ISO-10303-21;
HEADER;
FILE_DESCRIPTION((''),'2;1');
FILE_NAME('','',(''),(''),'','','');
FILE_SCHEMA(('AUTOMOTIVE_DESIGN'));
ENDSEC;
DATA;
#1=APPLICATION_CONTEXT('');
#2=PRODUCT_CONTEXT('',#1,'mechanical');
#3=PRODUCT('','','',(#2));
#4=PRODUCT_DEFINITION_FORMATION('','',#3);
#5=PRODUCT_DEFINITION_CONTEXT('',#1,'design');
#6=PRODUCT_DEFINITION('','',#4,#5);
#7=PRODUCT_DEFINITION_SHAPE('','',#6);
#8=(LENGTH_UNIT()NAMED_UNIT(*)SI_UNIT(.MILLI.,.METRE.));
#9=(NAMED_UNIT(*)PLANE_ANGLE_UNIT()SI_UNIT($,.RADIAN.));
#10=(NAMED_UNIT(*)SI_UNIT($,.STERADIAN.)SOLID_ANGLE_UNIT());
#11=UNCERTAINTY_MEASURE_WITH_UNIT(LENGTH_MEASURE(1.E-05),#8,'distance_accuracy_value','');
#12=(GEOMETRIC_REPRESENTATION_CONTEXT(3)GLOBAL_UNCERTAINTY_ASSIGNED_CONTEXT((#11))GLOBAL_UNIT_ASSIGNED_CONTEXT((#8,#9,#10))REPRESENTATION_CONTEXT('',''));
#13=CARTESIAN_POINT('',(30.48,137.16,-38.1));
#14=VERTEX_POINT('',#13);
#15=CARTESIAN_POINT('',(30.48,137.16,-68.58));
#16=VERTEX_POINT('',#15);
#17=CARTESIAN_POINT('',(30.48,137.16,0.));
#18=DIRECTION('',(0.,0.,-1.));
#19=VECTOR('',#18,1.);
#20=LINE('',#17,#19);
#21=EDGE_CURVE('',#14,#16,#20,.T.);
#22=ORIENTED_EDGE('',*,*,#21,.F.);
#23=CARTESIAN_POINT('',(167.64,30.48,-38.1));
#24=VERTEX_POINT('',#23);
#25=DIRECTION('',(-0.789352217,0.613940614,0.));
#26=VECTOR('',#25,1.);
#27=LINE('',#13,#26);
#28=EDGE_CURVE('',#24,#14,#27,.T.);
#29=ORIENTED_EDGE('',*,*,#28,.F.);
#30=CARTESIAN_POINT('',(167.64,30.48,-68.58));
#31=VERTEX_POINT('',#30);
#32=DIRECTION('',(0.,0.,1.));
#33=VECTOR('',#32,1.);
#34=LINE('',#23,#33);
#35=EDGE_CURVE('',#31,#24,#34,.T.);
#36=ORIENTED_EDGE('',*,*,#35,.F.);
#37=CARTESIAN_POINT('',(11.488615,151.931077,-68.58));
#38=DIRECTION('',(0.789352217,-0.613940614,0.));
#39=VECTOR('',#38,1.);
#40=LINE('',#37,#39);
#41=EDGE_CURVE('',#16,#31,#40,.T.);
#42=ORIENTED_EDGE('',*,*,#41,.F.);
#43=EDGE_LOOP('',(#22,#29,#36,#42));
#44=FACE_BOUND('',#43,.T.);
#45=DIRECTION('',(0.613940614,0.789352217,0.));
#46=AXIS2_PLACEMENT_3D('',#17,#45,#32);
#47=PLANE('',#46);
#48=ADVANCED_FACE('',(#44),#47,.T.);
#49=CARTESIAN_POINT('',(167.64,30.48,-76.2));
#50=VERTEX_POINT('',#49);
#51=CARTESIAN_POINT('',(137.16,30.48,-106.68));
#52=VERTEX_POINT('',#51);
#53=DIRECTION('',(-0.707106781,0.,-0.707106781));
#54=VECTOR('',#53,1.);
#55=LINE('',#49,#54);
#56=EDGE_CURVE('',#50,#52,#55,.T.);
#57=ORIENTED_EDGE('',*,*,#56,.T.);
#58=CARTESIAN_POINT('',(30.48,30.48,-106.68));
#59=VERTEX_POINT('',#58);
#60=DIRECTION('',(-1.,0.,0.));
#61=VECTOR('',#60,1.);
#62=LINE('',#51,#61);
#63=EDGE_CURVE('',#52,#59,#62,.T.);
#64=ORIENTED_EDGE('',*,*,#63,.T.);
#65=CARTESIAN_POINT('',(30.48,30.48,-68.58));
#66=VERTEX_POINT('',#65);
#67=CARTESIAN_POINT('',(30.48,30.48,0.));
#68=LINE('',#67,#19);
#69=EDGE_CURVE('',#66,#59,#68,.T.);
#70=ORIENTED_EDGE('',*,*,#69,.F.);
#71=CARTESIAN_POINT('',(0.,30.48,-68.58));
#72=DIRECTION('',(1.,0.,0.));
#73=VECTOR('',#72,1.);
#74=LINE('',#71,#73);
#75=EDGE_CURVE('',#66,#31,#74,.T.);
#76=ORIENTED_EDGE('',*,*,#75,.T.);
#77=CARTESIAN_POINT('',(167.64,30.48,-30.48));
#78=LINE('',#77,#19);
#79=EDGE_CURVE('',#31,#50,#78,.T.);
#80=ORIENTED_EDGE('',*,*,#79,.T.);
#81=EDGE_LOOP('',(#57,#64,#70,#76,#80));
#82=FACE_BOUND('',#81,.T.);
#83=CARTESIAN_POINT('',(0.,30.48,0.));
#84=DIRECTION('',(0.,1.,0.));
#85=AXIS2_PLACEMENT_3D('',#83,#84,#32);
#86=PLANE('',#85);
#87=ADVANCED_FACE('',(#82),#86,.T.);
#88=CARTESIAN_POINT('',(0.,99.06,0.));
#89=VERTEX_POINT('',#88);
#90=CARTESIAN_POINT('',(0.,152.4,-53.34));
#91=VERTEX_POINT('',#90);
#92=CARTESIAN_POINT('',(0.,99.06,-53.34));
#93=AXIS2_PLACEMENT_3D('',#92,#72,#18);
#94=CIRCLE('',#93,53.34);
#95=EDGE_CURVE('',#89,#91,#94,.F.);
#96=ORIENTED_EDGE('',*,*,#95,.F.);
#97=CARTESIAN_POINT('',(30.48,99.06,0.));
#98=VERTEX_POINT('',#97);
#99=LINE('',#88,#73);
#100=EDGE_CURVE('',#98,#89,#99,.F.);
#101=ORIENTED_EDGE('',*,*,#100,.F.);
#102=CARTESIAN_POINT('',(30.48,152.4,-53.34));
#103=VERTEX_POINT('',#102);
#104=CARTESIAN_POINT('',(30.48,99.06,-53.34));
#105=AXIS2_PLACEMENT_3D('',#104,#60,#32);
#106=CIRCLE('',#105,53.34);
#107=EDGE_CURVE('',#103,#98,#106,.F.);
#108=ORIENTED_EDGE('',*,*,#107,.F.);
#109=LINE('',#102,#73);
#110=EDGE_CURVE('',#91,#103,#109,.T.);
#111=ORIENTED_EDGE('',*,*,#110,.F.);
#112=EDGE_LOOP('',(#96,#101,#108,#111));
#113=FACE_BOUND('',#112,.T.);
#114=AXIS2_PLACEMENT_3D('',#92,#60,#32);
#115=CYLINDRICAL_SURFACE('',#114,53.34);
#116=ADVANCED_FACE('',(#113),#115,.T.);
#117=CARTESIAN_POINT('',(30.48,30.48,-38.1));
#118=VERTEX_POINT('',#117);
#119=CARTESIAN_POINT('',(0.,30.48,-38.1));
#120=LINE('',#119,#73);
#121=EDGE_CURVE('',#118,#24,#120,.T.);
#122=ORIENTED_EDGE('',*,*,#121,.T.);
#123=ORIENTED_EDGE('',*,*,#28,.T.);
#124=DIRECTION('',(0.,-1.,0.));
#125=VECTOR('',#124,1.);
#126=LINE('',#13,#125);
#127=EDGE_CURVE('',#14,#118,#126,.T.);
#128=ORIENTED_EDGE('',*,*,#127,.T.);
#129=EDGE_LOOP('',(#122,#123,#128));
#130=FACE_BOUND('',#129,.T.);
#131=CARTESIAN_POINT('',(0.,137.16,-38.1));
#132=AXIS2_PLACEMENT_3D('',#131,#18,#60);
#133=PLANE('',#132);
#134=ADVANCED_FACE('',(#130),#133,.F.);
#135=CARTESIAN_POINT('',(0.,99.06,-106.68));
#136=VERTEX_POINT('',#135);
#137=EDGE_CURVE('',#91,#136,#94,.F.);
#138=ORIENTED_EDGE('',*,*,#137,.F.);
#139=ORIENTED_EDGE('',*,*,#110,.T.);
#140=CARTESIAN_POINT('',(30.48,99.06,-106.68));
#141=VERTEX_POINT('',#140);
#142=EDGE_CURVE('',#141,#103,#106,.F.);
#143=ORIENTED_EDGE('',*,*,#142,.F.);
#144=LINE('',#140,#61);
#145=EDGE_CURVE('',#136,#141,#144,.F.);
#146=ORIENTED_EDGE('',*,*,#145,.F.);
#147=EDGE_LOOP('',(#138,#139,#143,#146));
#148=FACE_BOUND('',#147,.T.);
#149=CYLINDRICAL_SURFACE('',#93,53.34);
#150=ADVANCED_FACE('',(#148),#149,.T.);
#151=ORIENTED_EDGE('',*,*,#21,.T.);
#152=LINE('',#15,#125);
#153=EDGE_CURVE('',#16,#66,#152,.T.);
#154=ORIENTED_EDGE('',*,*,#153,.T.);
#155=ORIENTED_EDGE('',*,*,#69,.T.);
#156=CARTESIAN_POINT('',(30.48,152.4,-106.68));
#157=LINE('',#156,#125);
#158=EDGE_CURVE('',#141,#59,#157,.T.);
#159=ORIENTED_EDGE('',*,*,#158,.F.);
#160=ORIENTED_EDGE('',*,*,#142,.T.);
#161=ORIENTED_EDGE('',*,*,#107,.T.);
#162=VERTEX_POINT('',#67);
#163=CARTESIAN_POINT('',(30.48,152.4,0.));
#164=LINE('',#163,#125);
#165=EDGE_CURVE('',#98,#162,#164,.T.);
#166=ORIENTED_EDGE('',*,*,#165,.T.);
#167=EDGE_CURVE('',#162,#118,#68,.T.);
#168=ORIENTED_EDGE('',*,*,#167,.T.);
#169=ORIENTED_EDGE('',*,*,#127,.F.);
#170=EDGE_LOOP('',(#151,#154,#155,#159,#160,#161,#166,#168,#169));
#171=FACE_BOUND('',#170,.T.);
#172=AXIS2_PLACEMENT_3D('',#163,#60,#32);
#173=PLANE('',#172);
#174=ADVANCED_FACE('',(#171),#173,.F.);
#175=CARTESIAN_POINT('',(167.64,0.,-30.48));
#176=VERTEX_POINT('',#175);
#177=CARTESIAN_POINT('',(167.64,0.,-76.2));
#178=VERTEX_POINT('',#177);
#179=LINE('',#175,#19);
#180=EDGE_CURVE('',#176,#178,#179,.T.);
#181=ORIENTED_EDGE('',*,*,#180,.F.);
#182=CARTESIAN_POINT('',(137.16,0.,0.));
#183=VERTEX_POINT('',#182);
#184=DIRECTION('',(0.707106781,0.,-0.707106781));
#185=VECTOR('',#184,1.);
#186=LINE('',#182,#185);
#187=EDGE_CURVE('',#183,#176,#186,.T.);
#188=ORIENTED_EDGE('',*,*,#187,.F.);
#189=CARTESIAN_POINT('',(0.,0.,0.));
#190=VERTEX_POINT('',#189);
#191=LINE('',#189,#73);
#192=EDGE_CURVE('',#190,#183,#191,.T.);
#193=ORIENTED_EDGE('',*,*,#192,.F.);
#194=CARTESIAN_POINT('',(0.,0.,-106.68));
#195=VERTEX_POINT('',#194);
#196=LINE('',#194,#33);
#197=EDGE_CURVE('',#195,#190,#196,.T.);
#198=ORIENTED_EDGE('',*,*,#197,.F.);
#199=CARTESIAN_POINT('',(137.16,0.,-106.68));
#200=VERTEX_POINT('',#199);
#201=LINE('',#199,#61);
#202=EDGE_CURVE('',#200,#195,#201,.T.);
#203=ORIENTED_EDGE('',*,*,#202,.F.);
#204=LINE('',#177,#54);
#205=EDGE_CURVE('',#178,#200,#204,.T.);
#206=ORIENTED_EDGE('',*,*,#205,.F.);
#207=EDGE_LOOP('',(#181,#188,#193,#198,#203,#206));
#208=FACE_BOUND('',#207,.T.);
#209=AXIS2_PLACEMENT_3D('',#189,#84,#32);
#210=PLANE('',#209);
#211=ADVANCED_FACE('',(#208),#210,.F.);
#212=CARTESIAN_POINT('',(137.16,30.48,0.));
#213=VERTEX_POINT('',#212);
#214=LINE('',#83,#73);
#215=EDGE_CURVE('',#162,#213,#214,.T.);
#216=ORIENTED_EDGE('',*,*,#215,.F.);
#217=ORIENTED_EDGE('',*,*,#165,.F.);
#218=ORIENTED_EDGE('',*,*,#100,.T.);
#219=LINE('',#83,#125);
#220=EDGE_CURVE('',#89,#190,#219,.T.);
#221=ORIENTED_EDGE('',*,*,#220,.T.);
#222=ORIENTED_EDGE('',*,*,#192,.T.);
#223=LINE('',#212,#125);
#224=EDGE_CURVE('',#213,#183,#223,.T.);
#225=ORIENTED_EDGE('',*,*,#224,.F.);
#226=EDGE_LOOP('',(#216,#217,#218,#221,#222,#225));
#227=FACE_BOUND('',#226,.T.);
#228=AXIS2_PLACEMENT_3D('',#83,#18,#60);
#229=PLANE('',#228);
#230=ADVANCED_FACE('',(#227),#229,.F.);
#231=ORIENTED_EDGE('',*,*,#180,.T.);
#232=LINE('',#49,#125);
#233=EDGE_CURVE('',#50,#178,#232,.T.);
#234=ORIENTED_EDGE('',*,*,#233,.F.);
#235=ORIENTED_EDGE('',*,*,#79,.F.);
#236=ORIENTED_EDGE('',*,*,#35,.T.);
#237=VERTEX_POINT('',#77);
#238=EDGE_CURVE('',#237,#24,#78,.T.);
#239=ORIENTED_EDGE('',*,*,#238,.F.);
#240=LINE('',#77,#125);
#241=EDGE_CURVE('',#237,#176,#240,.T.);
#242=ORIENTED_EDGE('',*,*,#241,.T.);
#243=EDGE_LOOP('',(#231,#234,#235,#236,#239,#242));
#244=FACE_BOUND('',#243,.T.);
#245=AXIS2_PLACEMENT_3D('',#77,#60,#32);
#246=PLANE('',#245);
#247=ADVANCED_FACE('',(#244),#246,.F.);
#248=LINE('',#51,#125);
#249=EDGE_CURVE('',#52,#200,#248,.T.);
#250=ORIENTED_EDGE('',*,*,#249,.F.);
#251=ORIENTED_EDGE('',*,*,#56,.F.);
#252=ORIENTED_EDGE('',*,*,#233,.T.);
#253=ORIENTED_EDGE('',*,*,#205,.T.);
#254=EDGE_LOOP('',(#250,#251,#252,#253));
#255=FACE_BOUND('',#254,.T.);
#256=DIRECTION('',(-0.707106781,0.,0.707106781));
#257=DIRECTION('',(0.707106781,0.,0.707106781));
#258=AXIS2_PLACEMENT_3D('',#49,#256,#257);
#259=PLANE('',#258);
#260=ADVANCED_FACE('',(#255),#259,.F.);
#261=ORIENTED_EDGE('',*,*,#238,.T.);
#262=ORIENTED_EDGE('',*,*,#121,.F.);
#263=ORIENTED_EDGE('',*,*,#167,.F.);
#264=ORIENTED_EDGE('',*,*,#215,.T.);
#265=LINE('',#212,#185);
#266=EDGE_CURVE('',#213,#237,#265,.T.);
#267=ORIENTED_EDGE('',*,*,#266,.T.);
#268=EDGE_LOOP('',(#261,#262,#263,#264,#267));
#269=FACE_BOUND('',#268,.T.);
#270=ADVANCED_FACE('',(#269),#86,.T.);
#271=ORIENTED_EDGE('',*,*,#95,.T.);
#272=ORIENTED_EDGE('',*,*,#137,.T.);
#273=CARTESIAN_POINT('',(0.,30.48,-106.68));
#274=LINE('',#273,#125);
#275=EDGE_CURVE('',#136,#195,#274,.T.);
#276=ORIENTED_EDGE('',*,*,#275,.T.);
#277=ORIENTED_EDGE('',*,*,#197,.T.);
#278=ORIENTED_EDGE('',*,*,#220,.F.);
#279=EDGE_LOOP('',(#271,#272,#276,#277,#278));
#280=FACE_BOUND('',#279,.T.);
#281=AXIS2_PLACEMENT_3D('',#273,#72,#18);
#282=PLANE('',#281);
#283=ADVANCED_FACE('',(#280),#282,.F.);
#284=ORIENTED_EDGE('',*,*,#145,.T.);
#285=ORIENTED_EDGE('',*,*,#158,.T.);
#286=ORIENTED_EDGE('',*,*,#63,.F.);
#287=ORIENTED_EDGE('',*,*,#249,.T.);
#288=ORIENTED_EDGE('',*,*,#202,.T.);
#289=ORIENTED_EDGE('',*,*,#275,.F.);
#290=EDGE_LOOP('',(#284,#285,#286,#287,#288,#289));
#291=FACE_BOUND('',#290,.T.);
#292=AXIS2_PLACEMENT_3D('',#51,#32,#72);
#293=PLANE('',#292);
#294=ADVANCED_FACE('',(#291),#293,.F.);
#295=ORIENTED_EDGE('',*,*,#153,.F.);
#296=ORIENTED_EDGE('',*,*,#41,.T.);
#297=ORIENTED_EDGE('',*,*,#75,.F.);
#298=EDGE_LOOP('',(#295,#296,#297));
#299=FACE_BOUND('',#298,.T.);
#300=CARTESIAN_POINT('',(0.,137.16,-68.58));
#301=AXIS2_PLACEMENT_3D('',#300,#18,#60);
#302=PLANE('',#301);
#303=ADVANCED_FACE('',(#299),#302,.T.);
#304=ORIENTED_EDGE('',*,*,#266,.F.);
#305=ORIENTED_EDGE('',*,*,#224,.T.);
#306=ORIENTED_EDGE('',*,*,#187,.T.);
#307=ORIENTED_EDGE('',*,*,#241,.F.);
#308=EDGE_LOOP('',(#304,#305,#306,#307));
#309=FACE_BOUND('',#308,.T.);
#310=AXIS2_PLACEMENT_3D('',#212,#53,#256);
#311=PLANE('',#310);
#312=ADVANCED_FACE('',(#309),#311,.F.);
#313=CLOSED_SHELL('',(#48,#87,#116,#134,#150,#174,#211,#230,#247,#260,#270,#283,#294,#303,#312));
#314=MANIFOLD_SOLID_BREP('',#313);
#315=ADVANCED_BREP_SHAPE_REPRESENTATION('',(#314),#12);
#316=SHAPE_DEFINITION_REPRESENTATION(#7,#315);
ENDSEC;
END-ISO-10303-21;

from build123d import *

# Parameters (mm, degrees)
BOSS_EXTRUDE1_DEPTH = 30.48
BOSS_EXTRUDE2_DEPTH = 121.92
SKETCH2_3_W         = 137.16
SKETCH2_3_H         = 30.48
BOSS_EXTRUDE3_DEPTH = 106.68
FILLET1_R           = 53.34
CHAMFER1_SIZE2      = 137.16
CHAMFER1_SIZE       = 106.68


with BuildPart() as part:
    # Sketch1 → Boss-Extrude1 (new body)
    with BuildSketch(Plane(origin=(0, 0, 0), x_dir=(1, 0, 0), z_dir=(0, 1, 0))):
        Polygon((0, 0), (137.16, 0), (167.64, 30.48), (167.64, 76.2), (137.16, 106.68), (0, 106.68), align=None)
    extrude(amount=BOSS_EXTRUDE1_DEPTH)

    # Sketch2 → Boss-Extrude2 (add)
    with BuildSketch(Plane(origin=(0, 30.48, 0), x_dir=(1, 0, 0), z_dir=(0, 1, 0))):
        Polygon((30.48, 106.68), (0, 106.68), (0, 0), (30.48, 0), (30.48, 38.1), (30.48, 68.58), align=None)
    extrude(amount=BOSS_EXTRUDE2_DEPTH)

    # Sketch2<3> → Boss-Extrude3 (add)
    with BuildSketch(Plane(origin=(0, 30.48, 0), x_dir=(1, 0, 0), z_dir=(0, 1, 0))):
        with Locations((99.06, 53.34)):
            Rectangle(SKETCH2_3_W, SKETCH2_3_H)
    extrude(amount=BOSS_EXTRUDE3_DEPTH)

    # Fillet1
    fillet1_edges = [part.edges().sort_by_distance(p)[0] for p in [
        (15.24, 152.4, 0),
        (15.24, 152.4, -106.68),
    ]]
    fillet(fillet1_edges, radius=FILLET1_R - 0.0001)  # a hair under: the kernel refuses the full size

    # Chamfer1
    chamfer1_edges = [part.edges().sort_by_distance(p)[0] for p in [
        (167.64, 137.16, -53.34),
    ]]
    chamfer1_side = [part.faces().sort_by_distance(p)[0] for p in [
        (167.64, 135.0264, -53.34),
    ]]
    chamfer(chamfer1_edges, length=CHAMFER1_SIZE - 0.0001, length2=CHAMFER1_SIZE2 - 0.0001, reference=chamfer1_side[0])  # a hair under: the kernel refuses the full size


solid = part.part
